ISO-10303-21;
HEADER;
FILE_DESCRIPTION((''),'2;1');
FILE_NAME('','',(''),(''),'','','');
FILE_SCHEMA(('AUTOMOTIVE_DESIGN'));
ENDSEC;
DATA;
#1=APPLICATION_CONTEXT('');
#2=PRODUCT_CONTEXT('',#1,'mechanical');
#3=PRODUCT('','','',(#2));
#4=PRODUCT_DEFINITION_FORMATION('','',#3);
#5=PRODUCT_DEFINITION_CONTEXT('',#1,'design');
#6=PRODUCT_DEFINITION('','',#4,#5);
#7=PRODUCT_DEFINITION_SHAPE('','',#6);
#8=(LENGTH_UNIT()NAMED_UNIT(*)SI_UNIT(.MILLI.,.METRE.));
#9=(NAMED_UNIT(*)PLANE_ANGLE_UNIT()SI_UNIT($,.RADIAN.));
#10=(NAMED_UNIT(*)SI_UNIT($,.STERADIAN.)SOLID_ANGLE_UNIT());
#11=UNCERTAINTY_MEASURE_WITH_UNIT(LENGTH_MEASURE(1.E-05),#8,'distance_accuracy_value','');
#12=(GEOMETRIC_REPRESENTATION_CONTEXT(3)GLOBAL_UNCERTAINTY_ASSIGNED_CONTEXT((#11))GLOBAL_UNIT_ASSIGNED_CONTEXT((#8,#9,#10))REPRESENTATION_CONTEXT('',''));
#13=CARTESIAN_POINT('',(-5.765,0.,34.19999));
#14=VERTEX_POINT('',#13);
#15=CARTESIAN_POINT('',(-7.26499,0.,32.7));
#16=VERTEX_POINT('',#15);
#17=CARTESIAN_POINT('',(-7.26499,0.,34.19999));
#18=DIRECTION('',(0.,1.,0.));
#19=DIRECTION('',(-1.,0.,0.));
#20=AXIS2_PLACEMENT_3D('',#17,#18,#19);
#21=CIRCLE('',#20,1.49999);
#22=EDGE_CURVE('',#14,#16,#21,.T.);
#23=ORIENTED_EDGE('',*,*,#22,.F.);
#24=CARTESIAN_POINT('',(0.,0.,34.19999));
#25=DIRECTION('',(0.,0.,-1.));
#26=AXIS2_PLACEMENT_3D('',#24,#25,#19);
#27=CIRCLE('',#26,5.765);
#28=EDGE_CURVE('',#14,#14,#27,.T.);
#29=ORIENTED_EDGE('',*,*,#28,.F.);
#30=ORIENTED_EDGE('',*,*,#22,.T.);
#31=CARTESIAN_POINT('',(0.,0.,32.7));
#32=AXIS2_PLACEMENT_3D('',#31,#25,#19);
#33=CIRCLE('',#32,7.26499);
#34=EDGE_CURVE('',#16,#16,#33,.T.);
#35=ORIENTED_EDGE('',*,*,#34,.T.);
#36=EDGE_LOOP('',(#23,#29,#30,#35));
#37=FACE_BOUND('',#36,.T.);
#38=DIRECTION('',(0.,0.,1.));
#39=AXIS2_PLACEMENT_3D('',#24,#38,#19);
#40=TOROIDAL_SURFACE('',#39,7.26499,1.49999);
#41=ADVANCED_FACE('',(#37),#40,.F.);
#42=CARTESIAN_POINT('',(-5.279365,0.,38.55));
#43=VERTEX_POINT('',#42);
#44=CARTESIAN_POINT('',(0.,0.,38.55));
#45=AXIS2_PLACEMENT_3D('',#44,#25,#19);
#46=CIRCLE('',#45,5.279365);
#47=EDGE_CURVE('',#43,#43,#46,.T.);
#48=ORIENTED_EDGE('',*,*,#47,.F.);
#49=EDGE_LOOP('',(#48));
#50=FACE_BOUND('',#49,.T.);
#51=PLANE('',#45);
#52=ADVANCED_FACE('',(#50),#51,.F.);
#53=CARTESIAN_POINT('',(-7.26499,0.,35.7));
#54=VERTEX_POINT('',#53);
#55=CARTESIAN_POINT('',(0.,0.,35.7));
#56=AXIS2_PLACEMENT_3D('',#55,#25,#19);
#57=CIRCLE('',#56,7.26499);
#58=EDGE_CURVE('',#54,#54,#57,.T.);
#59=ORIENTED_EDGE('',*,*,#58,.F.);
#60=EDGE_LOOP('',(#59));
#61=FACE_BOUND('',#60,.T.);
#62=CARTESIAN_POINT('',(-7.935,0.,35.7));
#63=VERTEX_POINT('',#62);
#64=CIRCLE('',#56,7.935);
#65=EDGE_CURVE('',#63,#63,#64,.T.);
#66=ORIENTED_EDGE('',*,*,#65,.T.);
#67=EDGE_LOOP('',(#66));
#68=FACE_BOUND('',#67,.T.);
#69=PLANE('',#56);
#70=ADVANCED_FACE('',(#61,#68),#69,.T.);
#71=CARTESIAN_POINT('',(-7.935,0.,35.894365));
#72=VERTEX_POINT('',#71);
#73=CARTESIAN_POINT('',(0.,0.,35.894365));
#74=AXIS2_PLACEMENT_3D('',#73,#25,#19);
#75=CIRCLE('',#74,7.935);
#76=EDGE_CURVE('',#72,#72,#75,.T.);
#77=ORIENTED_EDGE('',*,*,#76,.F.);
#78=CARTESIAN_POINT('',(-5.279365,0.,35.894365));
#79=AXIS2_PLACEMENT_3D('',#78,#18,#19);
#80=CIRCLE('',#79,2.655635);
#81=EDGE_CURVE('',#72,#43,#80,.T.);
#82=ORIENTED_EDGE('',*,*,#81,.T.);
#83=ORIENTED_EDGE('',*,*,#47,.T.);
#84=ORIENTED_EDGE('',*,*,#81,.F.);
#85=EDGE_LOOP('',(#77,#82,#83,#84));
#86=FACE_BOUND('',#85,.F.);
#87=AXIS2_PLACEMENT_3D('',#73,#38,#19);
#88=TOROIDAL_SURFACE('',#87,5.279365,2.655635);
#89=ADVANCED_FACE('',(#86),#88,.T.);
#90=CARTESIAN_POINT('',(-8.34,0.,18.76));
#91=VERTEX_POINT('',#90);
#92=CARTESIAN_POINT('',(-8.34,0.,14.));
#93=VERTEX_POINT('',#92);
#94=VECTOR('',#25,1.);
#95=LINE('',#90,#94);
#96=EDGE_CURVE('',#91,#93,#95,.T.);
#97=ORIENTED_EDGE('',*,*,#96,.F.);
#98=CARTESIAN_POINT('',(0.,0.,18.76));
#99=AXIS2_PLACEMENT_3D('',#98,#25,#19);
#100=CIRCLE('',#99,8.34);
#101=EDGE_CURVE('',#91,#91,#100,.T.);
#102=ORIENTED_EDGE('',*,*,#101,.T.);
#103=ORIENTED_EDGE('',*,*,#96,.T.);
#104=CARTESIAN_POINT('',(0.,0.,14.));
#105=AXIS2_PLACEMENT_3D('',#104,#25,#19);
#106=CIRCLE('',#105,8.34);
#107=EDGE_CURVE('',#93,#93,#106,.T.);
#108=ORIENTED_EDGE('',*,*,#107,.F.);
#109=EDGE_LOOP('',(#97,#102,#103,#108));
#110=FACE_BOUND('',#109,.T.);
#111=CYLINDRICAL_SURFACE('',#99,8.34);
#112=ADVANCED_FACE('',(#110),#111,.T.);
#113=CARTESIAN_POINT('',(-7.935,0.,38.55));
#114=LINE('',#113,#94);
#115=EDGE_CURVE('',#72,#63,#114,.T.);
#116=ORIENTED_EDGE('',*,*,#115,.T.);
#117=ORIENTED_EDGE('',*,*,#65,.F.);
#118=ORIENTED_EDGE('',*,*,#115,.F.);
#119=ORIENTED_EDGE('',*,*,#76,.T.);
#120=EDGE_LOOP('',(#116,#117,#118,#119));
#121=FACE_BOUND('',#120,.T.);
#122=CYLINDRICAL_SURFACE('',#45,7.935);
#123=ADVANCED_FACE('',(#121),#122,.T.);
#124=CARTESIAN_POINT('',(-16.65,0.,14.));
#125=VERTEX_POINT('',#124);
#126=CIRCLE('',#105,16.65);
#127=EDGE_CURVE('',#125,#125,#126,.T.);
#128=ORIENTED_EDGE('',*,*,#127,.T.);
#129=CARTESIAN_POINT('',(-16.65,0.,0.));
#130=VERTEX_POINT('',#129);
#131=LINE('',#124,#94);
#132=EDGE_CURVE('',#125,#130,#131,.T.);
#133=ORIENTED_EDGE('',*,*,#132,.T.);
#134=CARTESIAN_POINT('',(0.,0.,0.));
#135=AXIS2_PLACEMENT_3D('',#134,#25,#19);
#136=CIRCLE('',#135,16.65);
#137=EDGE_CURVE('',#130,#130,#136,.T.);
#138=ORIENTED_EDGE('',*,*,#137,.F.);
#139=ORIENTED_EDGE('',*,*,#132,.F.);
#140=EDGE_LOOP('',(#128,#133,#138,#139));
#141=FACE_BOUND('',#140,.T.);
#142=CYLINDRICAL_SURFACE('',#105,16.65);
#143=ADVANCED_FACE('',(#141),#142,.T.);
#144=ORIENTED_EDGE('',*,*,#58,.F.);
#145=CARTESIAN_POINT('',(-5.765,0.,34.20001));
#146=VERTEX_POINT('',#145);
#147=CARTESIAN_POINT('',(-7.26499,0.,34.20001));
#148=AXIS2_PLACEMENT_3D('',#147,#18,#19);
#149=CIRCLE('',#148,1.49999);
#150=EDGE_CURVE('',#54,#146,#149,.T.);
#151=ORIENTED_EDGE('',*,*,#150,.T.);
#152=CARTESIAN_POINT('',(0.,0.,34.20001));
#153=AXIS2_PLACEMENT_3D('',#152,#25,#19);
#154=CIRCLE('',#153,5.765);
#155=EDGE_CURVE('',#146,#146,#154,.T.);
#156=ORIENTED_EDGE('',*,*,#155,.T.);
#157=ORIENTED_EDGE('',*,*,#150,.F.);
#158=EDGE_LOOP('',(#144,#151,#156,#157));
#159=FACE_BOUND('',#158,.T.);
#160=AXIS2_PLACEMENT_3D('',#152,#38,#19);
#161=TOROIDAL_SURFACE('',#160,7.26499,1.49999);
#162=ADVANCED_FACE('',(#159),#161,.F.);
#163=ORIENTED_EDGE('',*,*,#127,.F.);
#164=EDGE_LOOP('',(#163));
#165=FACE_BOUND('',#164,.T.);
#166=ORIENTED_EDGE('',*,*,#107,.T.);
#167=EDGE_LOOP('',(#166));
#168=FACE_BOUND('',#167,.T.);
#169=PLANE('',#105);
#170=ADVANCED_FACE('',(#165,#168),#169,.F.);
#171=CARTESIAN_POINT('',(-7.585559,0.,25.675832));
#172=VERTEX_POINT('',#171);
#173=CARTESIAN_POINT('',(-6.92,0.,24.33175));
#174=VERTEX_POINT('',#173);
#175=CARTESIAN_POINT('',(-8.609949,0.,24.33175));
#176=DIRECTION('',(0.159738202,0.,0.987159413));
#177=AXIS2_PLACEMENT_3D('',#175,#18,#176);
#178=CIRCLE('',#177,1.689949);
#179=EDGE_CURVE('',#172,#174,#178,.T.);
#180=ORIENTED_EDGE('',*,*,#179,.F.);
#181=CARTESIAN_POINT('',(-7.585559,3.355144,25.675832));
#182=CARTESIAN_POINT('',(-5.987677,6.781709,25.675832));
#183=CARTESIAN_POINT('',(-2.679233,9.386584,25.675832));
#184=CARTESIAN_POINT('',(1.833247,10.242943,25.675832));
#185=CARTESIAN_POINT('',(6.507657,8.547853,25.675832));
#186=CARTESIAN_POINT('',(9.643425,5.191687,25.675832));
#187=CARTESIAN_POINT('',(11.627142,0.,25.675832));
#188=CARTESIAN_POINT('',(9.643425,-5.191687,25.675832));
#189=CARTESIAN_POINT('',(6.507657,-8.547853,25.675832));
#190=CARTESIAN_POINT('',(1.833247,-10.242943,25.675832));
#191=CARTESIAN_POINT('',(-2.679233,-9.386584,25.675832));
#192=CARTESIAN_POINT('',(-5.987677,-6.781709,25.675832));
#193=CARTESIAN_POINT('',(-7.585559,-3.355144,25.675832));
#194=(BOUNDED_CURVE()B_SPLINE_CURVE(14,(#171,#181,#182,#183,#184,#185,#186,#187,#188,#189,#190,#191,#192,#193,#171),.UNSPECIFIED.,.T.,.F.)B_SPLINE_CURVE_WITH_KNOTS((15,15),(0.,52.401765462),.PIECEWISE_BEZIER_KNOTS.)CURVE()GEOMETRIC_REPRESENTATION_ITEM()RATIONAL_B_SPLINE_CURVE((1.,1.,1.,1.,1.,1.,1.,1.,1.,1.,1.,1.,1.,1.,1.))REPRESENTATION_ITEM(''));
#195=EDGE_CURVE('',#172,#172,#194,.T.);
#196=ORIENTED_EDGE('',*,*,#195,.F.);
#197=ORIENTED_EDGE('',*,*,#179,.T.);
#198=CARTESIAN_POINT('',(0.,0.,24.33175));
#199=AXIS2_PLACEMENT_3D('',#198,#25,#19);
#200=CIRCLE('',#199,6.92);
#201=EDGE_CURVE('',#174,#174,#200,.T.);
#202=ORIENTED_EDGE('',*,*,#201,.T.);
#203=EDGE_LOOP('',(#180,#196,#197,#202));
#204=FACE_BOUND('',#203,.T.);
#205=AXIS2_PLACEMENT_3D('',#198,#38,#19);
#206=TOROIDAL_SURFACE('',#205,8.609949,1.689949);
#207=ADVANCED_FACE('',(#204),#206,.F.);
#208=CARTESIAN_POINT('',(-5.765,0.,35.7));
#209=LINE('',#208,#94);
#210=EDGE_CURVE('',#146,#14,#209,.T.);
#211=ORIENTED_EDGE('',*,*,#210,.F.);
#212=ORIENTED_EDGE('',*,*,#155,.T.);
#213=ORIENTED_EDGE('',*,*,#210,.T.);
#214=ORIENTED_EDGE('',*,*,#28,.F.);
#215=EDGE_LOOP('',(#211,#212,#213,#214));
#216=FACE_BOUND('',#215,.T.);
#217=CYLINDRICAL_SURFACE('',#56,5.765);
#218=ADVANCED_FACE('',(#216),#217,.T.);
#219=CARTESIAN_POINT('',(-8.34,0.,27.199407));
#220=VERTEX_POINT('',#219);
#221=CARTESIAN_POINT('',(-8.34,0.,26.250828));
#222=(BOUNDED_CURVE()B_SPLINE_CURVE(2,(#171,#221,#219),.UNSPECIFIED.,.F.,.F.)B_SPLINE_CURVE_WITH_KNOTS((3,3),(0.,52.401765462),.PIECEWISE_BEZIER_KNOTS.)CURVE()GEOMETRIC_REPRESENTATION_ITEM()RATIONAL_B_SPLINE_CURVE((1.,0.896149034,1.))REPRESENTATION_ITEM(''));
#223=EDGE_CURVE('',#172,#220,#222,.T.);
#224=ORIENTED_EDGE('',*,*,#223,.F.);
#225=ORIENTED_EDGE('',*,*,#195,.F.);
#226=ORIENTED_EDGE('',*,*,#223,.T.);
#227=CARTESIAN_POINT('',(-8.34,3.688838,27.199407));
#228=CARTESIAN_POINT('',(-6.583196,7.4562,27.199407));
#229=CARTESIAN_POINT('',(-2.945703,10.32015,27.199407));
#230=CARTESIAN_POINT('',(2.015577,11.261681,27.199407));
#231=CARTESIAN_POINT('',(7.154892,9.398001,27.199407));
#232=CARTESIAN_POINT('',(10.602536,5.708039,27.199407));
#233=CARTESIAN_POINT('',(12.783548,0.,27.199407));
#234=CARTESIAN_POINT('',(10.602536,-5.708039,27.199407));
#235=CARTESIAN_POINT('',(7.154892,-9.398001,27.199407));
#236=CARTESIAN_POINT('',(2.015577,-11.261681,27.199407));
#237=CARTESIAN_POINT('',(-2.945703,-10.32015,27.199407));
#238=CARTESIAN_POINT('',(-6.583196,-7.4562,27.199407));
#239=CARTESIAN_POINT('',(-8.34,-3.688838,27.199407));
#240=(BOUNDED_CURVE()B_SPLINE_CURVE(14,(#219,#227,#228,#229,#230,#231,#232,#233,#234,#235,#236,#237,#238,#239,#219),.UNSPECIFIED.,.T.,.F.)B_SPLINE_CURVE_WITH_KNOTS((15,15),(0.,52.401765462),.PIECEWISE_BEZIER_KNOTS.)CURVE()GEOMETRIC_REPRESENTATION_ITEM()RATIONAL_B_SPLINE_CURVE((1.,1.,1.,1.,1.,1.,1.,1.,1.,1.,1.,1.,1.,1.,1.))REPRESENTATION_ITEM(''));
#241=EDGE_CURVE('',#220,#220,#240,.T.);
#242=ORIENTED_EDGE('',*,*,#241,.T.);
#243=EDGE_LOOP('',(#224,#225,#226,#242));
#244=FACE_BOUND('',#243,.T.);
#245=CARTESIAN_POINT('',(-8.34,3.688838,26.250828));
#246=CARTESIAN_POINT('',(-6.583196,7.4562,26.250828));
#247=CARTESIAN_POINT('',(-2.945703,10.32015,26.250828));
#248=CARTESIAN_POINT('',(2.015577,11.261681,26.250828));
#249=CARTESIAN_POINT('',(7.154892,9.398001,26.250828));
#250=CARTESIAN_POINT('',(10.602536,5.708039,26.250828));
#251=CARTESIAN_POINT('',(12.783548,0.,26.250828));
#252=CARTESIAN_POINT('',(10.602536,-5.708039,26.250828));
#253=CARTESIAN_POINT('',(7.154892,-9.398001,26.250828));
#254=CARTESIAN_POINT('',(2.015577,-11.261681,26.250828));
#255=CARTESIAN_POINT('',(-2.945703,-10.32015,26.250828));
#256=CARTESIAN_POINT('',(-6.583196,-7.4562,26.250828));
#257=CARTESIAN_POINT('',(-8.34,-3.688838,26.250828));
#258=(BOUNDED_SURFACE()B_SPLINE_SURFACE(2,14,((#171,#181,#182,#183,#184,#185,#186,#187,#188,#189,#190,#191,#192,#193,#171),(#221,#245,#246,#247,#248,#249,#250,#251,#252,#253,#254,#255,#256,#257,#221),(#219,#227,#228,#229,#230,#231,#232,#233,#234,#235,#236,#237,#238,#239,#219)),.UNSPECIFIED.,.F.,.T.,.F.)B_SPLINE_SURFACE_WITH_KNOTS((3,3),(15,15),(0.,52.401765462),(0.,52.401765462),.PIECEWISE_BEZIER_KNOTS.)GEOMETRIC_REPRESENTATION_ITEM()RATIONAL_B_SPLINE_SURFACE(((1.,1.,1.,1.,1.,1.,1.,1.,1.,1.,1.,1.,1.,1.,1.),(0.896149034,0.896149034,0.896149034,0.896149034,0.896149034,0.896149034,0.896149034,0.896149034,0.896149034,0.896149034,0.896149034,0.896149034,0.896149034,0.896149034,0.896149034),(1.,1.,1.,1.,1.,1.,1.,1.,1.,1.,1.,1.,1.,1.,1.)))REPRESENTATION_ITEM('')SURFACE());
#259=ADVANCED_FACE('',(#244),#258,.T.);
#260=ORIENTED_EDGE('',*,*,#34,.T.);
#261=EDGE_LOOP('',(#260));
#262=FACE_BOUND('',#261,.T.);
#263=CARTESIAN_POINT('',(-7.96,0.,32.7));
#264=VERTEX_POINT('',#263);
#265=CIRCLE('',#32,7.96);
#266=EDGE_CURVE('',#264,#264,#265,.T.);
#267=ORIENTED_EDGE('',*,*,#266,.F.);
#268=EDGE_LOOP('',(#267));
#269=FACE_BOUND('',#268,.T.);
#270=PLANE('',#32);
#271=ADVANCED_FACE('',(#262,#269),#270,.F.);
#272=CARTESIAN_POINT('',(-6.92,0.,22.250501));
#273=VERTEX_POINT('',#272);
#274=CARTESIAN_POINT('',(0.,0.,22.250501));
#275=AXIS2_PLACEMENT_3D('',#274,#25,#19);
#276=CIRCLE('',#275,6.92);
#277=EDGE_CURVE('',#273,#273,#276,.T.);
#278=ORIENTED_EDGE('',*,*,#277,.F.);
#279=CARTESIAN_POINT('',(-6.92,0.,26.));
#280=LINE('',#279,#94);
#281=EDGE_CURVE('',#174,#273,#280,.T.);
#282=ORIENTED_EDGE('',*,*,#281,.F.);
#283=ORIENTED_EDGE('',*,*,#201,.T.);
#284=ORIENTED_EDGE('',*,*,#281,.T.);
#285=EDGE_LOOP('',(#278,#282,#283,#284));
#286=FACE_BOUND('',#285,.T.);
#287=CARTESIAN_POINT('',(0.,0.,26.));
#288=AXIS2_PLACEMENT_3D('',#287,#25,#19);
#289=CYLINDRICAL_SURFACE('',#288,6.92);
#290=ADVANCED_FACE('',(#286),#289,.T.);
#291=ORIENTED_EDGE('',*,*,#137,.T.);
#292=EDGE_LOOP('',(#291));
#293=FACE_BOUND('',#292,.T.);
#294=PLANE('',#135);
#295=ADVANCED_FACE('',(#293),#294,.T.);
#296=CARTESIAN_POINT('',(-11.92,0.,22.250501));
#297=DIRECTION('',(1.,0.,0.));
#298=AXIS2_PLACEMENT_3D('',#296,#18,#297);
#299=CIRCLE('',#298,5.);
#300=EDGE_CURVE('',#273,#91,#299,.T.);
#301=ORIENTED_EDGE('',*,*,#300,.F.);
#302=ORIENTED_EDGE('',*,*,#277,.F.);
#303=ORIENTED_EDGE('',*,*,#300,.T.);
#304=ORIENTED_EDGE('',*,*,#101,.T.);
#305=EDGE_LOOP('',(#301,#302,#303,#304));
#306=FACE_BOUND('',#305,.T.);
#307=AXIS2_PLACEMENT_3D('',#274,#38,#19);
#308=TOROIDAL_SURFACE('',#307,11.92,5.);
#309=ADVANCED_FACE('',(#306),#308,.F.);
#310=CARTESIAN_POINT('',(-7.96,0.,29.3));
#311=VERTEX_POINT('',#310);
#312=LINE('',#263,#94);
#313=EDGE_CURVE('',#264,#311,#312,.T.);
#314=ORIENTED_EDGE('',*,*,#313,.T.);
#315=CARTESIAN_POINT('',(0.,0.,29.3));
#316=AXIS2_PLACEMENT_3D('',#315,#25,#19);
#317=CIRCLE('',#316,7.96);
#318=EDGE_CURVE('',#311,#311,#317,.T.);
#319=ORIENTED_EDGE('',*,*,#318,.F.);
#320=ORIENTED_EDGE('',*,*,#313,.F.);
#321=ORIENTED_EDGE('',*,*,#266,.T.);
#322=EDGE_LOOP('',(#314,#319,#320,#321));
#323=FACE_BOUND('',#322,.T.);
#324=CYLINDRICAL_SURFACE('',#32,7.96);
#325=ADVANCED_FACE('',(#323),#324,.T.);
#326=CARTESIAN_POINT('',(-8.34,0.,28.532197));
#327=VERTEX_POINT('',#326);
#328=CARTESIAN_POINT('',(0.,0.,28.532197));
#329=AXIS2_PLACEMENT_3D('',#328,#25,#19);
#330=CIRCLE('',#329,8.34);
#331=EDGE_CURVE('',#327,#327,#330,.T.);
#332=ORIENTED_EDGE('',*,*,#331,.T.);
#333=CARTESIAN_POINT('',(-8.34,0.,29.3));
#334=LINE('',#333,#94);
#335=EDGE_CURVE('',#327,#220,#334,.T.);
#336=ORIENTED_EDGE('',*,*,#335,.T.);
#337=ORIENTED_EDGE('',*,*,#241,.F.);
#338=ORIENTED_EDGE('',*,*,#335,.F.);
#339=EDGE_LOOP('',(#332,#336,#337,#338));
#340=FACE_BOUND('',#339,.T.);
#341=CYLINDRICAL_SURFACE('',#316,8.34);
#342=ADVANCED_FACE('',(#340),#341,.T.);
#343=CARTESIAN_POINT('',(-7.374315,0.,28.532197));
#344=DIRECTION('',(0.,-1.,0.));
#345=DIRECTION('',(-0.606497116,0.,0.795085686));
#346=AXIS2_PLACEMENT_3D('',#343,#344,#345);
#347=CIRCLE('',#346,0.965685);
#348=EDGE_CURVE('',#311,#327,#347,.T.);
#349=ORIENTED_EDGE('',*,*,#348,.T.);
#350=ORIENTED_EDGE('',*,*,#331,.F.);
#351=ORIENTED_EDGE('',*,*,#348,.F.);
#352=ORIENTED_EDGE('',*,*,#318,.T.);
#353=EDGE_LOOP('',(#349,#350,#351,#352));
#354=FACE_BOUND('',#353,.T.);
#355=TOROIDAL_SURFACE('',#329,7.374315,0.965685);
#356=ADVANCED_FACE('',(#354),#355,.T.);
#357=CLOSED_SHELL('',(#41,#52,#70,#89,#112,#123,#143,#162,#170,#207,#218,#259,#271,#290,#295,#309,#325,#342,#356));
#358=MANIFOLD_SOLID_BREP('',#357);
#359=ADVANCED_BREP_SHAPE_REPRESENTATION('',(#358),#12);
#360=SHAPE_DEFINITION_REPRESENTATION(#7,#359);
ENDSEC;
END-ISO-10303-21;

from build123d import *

# Parameters (mm, degrees)
F2_R = 1.49999
F6_R = 1.9156322051
F7_R = 2.6556349186


# Not quite as in the source:
# - a fillet or chamfer that OpenCascade refuses, or shapes differently, is made with other operations: its cross-section is extruded or revolved along the edge and cut away or added
# - a fillet or chamfer is up to 0.001 mm smaller than in the source, because OpenCascade refuses the exact size


with BuildPart() as f1:
    # F0 (on Front) → F1 (revolve)
    with BuildSketch(Plane.XZ):
        Polygon((-16.65, 0), (0, 0), (0, 38.55), (-7.935, 38.55), (-7.935, 35.7), (-5.765, 35.7), (-5.765, 32.7), (-7.96, 32.7), (-7.96, 29.3), (-8.34, 29.3), (-8.34, 26), (-6.92, 26), (-6.92, 18.76), (-8.34, 18.76), (-8.34, 14), (-16.65, 14), align=None)
    revolve(axis=Axis((0, 0, 19.275), (0, 0, -1)))

    # F2 (radius 1.5 in the source; OpenCascade refuses exactly that, so slightly less here)
    f2_edges = [f1.edges().sort_by_distance(p)[0] for p in [
        (5.765, 0, 32.7),
        (5.765, 0, 35.7),
    ]]
    fillet(f2_edges, radius=F2_R)

    # F3: fillet of radius 1.6899494937 on 1 edges, made by hand

    # F3_s1 → F3_t2 (revolve)
    with BuildSketch(Plane.XZ):
        with BuildLine():
            ThreePointArc((-8.34, 26), (-7.3230675447, 25.4271335519), (-6.92, 24.3317504497))
            Line((-6.92, 24.3317504497), (-6.92, 26))
            Line((-6.92, 26), (-8.34, 26))
        make_face()
    revolve(axis=Axis((0, 0, 26), (0, 0, -1)))

    # F4: fillet of radius 0.9656854249 on 1 edges, made by hand

    # F4_s1 → F4_t2 (revolve, cut)
    with BuildSketch(Plane.XZ):
        with BuildLine():
            ThreePointArc((-7.96, 29.3), (-8.2398017842, 28.9605432653), (-8.34, 28.5321973411))
            Line((-8.34, 28.5321973411), (-8.34, 29.3))
            Line((-8.34, 29.3), (-7.96, 29.3))
        make_face()
    revolve(axis=Axis((0, 0, 29.3), (0, 0, -1)), mode=Mode.SUBTRACT)

    # F5: fillet of radius 5 on 1 edges, made by hand

    # F5_s1 → F5_t2 (revolve)
    with BuildSketch(Plane.XZ):
        with BuildLine():
            ThreePointArc((-6.92, 22.2505013966), (-7.2885855292, 20.3663570285), (-8.34, 18.76))
            Line((-8.34, 18.76), (-6.92, 18.76))
            Line((-6.92, 18.76), (-6.92, 22.2505013966))
        make_face()
    revolve(axis=Axis((0, 0, 18.76), (0, 0, -1)))

    # F6
    f6_edges = [f1.edges().sort_by_distance(p)[0] for p in [
        (8.34, 0, 26),
    ]]
    fillet(f6_edges, radius=F6_R)

    # F7
    f7_edges = [f1.edges().sort_by_distance(p)[0] for p in [
        (7.935, 0, 38.55),
    ]]
    fillet(f7_edges, radius=F7_R)


solid = f1.part
